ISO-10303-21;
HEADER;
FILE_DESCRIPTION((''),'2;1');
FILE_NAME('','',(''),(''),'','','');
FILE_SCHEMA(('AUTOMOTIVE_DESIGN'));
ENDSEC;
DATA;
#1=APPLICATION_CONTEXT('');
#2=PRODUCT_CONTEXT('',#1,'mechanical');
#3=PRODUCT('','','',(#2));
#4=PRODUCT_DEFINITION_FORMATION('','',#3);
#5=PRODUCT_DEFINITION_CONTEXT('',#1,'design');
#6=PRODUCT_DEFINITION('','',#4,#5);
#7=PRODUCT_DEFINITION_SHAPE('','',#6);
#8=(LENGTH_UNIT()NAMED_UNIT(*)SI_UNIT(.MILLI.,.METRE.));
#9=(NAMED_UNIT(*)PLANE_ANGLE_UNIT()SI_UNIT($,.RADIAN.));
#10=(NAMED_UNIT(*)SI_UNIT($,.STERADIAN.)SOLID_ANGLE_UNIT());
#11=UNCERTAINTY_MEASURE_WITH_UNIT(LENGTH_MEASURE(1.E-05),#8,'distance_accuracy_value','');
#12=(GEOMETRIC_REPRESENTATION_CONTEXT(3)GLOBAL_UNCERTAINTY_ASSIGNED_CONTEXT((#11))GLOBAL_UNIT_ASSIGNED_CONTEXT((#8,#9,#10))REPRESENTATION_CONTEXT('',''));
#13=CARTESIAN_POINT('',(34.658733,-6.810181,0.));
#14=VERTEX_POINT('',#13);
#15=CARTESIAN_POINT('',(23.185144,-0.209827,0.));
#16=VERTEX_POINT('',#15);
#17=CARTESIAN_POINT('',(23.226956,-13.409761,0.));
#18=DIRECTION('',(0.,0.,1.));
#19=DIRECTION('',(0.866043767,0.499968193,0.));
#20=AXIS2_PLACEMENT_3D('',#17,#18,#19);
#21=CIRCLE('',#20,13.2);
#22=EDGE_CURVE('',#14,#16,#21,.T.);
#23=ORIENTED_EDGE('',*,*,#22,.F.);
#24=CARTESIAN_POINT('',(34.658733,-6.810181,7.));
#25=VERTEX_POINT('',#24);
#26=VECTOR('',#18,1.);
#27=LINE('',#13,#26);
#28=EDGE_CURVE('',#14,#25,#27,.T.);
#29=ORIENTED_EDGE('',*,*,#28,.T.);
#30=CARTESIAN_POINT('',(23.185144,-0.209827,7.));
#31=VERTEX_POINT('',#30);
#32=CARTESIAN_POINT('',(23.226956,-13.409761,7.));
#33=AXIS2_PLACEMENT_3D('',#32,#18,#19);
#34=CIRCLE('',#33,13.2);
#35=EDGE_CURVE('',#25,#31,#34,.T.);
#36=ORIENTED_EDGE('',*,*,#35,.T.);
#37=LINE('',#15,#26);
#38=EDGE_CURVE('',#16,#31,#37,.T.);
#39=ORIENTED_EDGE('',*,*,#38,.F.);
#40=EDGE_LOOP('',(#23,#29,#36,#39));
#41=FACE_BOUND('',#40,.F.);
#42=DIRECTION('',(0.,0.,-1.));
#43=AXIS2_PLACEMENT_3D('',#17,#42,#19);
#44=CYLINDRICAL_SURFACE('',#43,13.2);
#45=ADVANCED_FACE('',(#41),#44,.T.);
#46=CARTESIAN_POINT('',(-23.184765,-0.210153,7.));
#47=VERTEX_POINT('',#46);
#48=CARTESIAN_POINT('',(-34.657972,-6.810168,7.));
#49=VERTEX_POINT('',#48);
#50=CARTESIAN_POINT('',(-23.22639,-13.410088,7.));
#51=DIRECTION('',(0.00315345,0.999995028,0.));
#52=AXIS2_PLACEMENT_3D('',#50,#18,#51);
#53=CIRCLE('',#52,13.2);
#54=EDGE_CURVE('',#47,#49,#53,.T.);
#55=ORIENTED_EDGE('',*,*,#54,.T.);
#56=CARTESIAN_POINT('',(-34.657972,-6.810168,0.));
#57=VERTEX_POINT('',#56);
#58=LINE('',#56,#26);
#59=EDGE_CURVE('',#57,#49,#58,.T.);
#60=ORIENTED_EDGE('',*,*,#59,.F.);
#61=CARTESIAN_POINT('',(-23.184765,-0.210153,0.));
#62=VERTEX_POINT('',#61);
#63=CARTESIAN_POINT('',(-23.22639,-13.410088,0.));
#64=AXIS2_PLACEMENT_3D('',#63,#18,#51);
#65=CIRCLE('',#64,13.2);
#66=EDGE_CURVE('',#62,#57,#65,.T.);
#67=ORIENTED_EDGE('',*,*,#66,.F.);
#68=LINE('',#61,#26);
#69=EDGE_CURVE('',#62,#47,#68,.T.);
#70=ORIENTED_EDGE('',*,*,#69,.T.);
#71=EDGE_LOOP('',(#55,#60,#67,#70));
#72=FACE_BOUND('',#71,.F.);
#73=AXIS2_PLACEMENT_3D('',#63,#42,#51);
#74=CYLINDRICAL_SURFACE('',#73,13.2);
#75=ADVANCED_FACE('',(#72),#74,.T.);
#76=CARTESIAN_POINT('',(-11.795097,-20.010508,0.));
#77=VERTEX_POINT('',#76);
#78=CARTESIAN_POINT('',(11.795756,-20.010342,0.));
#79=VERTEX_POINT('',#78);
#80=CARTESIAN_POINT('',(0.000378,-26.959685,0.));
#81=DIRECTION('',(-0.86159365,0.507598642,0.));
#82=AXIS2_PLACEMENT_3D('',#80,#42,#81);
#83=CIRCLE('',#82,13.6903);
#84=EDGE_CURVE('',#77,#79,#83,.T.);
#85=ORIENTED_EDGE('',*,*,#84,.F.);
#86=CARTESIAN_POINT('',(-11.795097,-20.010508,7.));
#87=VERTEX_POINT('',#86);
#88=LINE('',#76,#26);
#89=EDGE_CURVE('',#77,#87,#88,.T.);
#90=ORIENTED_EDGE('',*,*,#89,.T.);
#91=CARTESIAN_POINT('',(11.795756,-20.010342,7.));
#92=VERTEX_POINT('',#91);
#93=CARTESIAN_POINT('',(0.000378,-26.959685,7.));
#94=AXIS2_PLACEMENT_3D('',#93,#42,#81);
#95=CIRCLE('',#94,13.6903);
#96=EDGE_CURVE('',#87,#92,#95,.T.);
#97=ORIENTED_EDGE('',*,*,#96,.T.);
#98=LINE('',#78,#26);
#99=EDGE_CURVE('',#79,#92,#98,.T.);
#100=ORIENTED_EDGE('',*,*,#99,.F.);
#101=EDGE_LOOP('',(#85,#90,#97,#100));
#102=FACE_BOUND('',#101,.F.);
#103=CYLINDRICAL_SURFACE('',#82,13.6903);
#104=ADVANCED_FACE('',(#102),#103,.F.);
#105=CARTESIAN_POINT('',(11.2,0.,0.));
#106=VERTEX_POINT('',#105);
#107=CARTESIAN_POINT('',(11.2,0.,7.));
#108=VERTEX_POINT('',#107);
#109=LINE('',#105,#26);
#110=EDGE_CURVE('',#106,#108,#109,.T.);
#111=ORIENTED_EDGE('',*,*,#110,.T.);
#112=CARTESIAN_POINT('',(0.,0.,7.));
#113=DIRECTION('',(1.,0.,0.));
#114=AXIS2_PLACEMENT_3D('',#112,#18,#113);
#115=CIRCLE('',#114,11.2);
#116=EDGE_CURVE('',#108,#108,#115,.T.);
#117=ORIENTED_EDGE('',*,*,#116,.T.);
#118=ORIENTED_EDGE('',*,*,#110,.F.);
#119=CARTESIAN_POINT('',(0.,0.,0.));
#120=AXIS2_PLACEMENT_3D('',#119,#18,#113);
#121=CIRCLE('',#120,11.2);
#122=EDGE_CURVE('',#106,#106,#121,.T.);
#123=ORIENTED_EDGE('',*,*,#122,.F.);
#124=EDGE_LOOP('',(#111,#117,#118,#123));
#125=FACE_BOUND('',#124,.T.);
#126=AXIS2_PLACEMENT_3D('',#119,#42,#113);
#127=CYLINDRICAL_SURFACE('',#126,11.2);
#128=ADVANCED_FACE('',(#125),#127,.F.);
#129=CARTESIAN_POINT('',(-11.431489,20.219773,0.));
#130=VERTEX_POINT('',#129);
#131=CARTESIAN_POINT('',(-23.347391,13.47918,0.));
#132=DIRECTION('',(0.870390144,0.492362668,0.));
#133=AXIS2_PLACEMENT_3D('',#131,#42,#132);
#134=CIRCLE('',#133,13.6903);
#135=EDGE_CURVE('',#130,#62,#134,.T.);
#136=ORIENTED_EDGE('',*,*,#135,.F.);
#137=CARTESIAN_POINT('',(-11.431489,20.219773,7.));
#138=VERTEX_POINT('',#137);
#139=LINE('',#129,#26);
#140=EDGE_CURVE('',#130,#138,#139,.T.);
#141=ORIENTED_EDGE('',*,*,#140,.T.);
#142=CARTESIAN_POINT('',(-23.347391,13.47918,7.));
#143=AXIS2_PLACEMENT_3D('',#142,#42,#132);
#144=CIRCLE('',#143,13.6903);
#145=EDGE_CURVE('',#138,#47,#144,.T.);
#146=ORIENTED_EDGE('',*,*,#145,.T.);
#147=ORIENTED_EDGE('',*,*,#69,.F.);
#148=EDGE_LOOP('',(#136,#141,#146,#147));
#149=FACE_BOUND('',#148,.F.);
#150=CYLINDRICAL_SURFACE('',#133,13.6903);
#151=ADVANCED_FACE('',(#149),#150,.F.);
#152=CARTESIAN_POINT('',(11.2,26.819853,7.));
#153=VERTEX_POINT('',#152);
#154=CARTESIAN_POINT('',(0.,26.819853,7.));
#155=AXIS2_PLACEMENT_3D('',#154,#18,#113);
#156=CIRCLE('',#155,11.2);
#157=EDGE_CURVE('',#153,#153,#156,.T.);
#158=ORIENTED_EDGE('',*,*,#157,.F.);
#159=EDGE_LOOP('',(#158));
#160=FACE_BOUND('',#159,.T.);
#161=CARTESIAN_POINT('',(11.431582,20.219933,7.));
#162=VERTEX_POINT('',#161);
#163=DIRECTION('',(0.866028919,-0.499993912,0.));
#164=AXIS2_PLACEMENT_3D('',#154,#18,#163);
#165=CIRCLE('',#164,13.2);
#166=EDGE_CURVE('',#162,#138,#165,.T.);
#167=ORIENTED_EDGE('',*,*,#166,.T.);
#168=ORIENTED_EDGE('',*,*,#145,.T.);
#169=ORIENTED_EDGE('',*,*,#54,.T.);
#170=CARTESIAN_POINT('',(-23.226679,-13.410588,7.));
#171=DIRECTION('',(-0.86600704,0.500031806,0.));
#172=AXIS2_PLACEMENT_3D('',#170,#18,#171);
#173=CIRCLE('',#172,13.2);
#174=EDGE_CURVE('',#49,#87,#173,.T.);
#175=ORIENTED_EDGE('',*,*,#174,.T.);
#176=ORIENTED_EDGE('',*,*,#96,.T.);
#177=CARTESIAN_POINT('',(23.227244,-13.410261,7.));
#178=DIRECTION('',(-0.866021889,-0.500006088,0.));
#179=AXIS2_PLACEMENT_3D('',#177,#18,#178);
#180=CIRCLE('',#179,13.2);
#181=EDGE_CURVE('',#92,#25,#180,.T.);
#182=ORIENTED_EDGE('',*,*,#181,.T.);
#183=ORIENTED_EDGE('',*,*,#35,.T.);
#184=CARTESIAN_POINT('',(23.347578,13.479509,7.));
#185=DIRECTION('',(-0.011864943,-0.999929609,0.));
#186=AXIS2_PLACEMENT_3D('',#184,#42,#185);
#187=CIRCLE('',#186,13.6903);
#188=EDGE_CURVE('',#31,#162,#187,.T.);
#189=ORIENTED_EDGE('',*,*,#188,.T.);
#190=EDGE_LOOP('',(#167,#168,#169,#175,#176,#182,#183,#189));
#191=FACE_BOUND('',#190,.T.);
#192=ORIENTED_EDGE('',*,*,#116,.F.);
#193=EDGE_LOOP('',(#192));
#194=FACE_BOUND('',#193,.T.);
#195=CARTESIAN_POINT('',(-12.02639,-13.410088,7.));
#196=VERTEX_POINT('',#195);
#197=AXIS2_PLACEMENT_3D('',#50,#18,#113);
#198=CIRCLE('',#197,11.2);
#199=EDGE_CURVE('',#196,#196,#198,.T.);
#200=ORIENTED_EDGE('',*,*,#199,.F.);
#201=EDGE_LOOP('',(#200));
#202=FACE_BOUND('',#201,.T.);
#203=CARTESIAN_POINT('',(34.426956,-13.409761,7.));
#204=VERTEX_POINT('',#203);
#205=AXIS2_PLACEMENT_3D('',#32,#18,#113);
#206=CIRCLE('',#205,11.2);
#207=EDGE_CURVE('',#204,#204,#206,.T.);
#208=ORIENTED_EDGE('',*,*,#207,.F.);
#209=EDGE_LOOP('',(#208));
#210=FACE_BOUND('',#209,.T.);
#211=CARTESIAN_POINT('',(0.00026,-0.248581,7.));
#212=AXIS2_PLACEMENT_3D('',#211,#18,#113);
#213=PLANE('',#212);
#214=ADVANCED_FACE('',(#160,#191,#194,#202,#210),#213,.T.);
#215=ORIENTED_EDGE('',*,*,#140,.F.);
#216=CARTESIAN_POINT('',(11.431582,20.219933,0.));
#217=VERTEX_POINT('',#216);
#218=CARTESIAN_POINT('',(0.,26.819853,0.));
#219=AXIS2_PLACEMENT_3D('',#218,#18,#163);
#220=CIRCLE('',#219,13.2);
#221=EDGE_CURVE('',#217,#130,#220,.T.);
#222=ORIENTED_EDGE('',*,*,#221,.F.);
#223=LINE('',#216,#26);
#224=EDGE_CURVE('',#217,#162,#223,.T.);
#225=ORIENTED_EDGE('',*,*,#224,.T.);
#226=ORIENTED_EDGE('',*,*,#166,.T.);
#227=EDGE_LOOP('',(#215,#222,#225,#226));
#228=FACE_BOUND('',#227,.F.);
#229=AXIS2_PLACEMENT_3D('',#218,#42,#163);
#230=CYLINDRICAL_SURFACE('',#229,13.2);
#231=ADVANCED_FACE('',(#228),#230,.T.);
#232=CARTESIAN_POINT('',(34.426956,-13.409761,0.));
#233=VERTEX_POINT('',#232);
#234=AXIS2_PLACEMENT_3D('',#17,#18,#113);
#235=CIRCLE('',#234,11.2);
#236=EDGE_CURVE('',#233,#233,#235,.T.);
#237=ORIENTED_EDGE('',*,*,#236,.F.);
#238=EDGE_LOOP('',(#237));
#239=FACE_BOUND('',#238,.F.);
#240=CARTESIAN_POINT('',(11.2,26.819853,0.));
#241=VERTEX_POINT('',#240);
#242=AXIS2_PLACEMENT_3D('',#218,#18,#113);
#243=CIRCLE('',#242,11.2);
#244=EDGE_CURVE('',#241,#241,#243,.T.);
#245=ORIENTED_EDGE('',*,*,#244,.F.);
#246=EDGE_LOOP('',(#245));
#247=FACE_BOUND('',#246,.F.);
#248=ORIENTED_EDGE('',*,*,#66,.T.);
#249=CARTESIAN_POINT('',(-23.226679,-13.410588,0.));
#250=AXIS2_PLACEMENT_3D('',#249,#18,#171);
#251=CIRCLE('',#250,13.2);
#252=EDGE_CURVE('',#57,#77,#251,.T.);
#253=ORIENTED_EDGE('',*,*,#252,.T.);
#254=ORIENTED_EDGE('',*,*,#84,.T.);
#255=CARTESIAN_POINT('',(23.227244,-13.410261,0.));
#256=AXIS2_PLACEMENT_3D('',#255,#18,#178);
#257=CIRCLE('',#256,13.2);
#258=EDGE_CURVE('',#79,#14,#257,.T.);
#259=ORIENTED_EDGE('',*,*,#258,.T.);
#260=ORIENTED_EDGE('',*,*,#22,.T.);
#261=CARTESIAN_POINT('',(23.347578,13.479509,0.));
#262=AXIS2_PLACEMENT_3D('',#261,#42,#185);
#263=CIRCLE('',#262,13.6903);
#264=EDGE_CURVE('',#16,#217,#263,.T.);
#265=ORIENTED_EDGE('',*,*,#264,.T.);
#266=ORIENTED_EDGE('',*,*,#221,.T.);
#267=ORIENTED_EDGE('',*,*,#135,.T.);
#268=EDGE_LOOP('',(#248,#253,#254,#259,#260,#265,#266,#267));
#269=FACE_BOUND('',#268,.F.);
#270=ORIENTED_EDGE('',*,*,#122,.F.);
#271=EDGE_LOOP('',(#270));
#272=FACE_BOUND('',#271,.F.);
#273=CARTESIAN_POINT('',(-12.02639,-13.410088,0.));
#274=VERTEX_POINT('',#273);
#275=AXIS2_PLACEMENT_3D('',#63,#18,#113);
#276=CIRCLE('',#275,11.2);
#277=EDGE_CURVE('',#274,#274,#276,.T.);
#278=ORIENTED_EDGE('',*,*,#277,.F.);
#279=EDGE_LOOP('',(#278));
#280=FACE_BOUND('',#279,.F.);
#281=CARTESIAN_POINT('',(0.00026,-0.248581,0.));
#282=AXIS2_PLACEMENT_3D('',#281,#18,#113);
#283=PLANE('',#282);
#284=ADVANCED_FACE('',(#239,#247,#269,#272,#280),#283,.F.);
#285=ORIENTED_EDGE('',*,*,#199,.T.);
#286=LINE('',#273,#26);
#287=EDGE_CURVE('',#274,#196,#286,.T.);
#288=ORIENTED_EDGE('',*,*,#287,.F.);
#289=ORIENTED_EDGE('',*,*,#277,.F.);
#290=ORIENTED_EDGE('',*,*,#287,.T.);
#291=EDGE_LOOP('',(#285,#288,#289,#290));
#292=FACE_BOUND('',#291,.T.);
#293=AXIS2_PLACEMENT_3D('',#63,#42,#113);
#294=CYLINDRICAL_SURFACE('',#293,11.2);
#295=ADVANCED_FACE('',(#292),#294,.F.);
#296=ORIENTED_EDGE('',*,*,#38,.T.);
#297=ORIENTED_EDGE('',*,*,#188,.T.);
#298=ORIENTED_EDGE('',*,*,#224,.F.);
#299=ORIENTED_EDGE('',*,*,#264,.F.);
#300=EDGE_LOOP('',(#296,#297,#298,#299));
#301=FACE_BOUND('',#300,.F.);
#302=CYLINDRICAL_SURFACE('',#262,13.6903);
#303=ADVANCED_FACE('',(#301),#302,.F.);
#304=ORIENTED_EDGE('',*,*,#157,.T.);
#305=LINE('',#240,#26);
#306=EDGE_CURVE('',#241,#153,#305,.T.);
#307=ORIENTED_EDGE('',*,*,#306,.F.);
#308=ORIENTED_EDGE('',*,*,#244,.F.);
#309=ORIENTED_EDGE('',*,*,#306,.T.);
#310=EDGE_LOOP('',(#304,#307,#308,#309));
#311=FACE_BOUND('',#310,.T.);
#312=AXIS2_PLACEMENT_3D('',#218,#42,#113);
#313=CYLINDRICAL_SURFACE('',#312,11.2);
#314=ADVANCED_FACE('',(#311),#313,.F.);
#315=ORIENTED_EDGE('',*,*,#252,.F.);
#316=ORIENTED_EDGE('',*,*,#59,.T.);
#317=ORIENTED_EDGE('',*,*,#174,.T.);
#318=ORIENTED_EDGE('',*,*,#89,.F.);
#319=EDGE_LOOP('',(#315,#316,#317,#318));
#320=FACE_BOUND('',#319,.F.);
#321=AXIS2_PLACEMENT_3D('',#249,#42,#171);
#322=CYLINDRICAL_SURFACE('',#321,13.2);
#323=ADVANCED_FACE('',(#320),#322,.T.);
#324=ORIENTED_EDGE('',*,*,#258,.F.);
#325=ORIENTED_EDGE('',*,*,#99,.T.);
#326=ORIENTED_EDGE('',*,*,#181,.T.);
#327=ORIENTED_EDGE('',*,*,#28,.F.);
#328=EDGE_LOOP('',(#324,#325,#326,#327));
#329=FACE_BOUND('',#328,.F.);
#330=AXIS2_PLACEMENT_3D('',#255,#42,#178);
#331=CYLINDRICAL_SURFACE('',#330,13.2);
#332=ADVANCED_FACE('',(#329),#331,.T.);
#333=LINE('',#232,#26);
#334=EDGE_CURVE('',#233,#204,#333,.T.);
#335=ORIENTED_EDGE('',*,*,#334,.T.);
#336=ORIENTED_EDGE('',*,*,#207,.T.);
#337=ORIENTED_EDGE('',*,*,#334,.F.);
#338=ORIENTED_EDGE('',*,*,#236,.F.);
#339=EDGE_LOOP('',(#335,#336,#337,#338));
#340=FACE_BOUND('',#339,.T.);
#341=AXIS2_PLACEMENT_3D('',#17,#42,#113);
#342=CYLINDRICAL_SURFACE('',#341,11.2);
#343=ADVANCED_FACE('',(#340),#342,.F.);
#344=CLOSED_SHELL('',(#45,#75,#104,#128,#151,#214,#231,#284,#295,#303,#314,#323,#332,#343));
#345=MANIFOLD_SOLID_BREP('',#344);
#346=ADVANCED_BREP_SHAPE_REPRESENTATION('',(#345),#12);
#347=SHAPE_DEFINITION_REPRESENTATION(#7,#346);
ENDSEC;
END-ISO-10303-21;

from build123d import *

# Parameters (mm, degrees)
F0_R     = 11.2
F1_DEPTH = 7


# Not quite as in the source:
# - ends of sketch curves that miss each other by under 0.0002 mm in the source are joined


with BuildPart() as f1:
    # F0 (on Top) → F1 (new body)
    with BuildSketch(Plane.XY):
        with BuildLine():
            ThreePointArc((23.1851437088, -0.209827322), (11.4809905002, 6.6524743946), (11.4315817283, 20.219933477))
            ThreePointArc((11.4315817283, 20.219933477), (-9.27972e-05, 40.0198531118), (-11.4314889311, 20.2197727475))
            ThreePointArc((-11.4314889311, 20.2197727475), (-11.4807071504, 6.6523126094), (-23.1847645001, -0.2101533167))
            ThreePointArc((-23.1847645001, -0.2101533167), (-29.8083976459, -1.968183302), (-34.65797177, -6.8101680495))
            ThreePointArc((-34.65797177, -6.8101680495), (-29.8265597828, -24.8415250127), (-11.7950971191, -20.0105075285))
            ThreePointArc((-11.7950971191, -20.0105075285), (0.0002818311, -13.2693854266), (11.7957555615, -20.0103416826))
            ThreePointArc((11.7957555615, -20.0103416826), (29.8270373154, -24.8412493104), (34.6587334239, -6.8101809539))
            ThreePointArc((34.6587334239, -6.8101809539), (29.8271641279, -1.9786795899), (23.2271516953, -0.2102613183))
            ThreePointArc((23.2271516953, -0.2102613183), (23.2061475356, -0.2100604335), (23.1851437088, -0.209827322))
        make_face()
        with Locations((-23.2263900417, -13.4100876845)):
            Circle(F0_R, mode=Mode.SUBTRACT)
        Circle(F0_R, mode=Mode.SUBTRACT)
        with Locations((23.2269557018, -13.4097611005)):
            Circle(F0_R, mode=Mode.SUBTRACT)
        with Locations((0, 26.8198531121)):
            Circle(F0_R, mode=Mode.SUBTRACT)
        with BuildLine():
            ThreePointArc((34.6587334239, -6.8101809539), (29.8090523924, -1.9679079658), (23.1851437088, -0.209827322))
            ThreePointArc((23.1851437088, -0.209827322), (23.2061475356, -0.2100604335), (23.2271516953, -0.2102613183))
            ThreePointArc((23.2271516953, -0.2102613183), (29.8271641279, -1.9786795899), (34.6587334239, -6.8101809539))
        make_face()
        with BuildLine():
            ThreePointArc((11.7957555615, -20.0103416826), (29.8273248569, -24.8417502492), (34.6587334239, -6.8101809539))
            ThreePointArc((34.6587334239, -6.8101809539), (29.8270373154, -24.8412493104), (11.7957555615, -20.0103416826))
        make_face()
        with BuildLine():
            ThreePointArc((-11.7950971191, -20.0105075285), (-29.8265597828, -24.8415250127), (-34.65797177, -6.8101680495))
            ThreePointArc((-34.65797177, -6.8101680495), (-29.8268485884, -24.8420252217), (-11.7950971191, -20.0105075285))
        make_face()
    extrude(amount=F1_DEPTH)


solid = f1.part
